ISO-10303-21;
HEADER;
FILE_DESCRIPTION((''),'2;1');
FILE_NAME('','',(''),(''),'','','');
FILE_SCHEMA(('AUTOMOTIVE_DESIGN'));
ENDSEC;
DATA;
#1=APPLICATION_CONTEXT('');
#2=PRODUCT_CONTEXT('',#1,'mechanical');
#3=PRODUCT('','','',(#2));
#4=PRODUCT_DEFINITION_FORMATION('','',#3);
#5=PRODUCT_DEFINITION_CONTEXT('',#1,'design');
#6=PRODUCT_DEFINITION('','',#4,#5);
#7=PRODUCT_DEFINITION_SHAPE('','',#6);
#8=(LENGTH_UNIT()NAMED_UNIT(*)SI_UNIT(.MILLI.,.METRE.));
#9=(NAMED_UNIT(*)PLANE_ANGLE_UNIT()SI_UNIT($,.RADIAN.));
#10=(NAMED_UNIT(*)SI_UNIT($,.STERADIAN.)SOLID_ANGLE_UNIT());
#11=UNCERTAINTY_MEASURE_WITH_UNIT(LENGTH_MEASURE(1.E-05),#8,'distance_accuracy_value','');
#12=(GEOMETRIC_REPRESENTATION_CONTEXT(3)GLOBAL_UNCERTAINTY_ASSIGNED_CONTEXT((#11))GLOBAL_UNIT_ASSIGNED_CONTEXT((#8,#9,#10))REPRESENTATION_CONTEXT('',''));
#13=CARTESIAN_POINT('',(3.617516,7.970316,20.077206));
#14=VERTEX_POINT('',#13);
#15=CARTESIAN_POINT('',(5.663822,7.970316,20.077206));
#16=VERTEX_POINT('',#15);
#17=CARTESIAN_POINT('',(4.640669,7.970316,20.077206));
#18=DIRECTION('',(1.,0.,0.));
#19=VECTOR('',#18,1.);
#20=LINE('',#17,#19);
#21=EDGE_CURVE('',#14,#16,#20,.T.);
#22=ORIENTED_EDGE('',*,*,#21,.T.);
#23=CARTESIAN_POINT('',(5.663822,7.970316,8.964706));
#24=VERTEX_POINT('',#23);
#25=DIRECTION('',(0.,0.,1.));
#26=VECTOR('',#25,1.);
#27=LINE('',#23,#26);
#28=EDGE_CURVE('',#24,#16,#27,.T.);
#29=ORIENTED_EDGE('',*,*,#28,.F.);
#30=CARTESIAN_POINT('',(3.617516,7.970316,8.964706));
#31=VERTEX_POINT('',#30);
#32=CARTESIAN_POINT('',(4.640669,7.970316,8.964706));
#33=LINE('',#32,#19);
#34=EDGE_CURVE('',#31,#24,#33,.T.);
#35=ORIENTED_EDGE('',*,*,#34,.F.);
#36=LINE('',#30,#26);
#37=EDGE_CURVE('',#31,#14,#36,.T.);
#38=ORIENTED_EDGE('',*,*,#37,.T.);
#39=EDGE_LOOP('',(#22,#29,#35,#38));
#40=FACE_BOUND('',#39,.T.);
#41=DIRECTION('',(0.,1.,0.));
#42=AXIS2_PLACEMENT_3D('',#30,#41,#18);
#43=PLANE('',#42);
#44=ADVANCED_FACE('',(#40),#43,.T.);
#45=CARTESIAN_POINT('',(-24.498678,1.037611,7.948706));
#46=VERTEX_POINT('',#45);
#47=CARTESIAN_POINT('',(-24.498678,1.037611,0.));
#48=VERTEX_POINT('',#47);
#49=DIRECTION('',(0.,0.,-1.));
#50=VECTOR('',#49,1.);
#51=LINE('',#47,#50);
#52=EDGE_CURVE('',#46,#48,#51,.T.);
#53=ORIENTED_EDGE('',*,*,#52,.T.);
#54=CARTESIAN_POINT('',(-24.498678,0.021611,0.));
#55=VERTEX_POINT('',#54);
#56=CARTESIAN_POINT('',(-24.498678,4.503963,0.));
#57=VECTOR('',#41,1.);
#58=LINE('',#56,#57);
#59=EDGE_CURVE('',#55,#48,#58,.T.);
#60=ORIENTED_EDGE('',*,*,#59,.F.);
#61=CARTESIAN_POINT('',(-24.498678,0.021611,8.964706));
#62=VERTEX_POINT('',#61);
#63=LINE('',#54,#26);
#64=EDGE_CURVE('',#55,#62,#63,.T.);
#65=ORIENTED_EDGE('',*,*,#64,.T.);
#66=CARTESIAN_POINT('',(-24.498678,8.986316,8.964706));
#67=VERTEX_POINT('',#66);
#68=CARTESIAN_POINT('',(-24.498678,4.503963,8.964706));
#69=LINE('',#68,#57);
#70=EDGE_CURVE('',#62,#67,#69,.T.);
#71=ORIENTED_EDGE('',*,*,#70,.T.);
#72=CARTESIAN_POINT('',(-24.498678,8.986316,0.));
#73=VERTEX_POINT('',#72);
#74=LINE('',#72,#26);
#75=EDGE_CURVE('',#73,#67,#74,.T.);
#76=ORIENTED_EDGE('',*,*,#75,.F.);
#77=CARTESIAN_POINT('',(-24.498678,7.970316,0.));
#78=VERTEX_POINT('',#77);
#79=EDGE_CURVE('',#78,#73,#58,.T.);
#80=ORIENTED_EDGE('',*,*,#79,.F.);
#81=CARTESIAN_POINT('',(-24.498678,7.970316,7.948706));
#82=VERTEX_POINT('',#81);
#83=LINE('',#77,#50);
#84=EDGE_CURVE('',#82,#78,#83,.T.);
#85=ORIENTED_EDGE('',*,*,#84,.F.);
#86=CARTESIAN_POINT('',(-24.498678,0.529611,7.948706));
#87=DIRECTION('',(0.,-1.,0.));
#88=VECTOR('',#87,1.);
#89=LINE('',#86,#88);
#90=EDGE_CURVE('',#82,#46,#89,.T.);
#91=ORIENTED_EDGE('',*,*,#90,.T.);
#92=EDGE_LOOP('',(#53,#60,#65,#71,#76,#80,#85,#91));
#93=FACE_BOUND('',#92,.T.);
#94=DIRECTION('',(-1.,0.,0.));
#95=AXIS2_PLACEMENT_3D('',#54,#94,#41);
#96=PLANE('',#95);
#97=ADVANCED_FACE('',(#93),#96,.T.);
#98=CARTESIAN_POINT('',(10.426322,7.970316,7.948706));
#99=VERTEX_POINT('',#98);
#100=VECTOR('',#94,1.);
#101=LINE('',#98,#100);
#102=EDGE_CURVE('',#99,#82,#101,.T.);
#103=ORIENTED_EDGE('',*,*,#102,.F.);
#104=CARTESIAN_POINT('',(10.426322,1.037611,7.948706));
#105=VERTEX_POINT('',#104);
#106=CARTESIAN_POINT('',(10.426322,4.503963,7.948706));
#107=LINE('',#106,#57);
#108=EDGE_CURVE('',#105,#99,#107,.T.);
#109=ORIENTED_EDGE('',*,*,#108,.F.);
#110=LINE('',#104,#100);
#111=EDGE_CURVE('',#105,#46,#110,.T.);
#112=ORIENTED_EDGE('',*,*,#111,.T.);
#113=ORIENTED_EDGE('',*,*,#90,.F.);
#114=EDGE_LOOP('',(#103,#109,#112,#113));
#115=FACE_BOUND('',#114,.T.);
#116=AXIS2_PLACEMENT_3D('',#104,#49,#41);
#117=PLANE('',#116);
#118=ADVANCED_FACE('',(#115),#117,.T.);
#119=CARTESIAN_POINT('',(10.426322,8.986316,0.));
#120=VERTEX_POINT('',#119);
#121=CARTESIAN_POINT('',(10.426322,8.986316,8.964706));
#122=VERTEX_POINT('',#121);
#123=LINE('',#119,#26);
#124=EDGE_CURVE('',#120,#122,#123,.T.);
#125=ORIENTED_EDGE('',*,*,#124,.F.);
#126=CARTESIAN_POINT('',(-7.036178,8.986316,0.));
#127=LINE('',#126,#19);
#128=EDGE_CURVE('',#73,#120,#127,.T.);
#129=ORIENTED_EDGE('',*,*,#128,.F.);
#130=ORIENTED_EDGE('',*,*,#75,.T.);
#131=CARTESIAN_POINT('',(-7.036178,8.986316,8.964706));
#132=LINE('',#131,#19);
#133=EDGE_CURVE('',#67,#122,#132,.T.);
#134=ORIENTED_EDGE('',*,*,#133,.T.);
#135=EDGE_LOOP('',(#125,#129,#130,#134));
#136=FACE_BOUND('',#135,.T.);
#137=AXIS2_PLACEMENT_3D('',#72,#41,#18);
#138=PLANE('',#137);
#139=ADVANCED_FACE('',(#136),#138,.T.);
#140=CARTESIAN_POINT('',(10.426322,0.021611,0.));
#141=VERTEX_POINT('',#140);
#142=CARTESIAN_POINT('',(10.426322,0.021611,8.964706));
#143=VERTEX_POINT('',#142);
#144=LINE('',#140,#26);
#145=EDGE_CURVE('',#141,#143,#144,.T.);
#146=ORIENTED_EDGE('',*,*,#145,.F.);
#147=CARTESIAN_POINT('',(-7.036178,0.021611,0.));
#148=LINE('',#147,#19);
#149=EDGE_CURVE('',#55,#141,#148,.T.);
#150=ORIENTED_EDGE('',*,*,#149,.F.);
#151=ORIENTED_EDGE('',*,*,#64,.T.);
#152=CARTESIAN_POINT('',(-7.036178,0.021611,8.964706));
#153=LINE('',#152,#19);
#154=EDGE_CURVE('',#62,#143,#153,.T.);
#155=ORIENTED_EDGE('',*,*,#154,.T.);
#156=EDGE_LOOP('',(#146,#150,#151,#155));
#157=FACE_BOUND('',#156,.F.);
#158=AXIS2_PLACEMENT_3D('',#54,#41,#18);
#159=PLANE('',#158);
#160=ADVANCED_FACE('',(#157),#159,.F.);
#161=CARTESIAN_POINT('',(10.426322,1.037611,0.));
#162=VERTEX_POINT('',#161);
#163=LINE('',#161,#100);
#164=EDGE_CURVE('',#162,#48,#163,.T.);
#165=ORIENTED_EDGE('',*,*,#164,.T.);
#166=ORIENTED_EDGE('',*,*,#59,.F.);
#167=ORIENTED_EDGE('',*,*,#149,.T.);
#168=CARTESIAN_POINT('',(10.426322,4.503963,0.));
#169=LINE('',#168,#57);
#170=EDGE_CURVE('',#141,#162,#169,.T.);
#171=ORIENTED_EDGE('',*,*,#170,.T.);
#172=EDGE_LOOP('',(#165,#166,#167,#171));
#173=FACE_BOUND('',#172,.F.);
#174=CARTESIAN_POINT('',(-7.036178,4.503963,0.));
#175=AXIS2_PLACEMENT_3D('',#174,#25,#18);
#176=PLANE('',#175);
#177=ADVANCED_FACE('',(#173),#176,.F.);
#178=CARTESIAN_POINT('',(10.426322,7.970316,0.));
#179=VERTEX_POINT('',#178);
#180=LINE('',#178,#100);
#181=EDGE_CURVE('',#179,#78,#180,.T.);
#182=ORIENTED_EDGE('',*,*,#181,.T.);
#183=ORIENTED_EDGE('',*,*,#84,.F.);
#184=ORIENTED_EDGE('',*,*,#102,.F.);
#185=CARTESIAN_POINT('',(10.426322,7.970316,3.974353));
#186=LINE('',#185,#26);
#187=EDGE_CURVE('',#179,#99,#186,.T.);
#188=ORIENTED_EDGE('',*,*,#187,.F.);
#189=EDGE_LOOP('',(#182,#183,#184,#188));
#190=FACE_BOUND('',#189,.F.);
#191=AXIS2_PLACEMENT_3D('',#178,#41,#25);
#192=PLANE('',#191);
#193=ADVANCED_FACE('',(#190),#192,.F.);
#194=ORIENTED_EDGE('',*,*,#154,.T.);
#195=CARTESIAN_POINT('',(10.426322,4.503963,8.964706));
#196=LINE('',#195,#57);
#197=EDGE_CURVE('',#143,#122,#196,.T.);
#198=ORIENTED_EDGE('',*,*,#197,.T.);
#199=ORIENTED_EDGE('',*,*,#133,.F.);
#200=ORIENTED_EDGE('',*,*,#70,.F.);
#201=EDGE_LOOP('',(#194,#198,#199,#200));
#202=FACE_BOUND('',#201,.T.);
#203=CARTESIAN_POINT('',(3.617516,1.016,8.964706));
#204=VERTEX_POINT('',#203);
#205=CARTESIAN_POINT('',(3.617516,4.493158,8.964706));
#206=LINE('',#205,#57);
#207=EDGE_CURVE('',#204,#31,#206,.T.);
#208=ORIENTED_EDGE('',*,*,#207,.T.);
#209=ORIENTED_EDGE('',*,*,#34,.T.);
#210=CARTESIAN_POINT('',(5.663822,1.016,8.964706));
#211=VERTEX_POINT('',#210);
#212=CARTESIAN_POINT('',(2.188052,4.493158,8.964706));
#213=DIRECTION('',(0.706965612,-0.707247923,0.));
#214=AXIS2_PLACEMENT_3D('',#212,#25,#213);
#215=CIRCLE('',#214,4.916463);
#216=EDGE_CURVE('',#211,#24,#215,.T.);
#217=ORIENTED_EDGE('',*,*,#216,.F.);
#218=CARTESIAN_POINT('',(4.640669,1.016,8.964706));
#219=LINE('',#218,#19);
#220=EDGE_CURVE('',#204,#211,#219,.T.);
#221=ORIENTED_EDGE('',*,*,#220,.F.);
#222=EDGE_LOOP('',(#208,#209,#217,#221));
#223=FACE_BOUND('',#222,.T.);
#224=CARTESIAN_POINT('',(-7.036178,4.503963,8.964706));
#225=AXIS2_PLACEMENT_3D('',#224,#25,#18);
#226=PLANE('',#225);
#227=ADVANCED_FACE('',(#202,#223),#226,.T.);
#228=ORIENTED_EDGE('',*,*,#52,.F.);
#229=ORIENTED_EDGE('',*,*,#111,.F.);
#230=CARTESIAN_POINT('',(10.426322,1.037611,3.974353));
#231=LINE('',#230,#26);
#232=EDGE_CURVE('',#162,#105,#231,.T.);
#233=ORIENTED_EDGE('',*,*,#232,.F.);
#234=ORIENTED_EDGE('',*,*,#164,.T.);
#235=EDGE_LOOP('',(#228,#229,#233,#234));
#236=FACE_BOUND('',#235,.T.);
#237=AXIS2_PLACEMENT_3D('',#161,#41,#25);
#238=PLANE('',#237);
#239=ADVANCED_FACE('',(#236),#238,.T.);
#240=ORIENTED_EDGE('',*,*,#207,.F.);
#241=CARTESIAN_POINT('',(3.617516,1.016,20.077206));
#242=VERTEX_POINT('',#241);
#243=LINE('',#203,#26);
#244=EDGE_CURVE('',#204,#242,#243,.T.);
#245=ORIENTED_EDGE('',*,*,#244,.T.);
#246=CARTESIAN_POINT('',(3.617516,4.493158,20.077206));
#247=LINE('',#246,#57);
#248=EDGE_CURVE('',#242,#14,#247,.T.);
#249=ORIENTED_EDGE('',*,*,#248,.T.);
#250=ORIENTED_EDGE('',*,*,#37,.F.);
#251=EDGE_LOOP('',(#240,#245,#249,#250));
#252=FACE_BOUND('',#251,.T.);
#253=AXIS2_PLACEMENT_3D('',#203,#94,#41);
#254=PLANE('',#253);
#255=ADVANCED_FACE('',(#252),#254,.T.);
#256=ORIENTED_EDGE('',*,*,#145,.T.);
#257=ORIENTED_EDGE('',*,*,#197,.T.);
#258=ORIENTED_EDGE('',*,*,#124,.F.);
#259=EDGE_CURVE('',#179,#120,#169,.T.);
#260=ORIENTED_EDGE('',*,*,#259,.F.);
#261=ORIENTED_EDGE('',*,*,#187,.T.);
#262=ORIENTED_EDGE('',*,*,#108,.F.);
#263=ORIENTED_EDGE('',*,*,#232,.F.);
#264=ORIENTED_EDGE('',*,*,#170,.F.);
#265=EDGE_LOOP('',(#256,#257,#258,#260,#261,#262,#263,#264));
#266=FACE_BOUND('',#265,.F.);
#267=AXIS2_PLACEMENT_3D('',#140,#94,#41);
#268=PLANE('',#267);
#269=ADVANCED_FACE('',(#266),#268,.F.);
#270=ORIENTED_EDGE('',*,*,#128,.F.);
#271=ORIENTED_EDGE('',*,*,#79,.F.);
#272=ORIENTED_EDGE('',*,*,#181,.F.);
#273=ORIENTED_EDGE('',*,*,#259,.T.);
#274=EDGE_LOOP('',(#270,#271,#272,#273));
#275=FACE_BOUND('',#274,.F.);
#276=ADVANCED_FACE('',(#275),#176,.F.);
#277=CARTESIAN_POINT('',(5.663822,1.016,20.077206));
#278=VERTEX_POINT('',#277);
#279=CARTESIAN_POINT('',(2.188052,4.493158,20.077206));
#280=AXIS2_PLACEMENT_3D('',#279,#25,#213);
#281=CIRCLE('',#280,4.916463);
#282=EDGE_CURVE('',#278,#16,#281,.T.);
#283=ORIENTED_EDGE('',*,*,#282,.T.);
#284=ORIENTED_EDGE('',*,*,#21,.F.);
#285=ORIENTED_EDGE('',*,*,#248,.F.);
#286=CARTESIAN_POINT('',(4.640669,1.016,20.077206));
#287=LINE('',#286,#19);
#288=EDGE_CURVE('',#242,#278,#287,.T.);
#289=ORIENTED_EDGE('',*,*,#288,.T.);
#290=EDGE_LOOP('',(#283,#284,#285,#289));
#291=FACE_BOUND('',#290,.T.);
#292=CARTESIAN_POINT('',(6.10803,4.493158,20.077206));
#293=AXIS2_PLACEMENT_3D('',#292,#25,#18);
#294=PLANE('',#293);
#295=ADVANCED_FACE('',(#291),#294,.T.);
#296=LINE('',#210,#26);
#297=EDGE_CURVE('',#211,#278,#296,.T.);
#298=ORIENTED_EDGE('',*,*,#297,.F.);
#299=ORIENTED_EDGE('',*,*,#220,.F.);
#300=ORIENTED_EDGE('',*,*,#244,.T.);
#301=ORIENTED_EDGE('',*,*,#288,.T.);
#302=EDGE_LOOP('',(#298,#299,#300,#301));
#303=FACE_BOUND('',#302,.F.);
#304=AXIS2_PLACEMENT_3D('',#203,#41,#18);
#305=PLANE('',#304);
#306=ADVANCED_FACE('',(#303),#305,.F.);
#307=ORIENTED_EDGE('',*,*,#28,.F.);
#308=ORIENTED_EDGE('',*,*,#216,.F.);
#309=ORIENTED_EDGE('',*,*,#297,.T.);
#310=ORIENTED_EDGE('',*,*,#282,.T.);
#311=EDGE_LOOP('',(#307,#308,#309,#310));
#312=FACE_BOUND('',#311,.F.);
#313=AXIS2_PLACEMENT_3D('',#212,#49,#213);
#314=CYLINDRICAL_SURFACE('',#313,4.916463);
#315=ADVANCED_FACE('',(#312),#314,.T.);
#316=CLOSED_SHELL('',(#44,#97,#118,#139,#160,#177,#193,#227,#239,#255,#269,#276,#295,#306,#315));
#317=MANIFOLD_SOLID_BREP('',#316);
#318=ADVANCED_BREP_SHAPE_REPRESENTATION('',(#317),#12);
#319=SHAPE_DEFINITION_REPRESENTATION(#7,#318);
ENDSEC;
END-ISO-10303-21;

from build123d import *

# Parameters (mm, degrees)
F0_W     = 34.925
F0_H     = 8.9647058824
F1_DEPTH = 8.9647058824
F2_W     = 6.9327058824
F2_H     = 7.9487058824
F3_DEPTH = 34.926
F4_W     = 2.0463057544
F4_H     = 6.9543164351
F5_DEPTH = 11.1125


# Not quite as in the source:
# - a length typed as a fraction of an inch, garbled in the dataset ("3 / 203.2 mm" for 3/8 in), is restored


with BuildPart() as f1:
    # F0 (on Top) → F1 (new body)
    with BuildSketch(Plane.XY):
        with Locations((-7.0361781826, 4.5039634939)):
            Rectangle(F0_W, F0_H)
    extrude(amount=F1_DEPTH)

    # F2 (on face) → F3 (cut, through all)
    with BuildSketch(Plane.YZ.offset(10.4263218174)):
        with Locations((4.5039634939, 3.9743529412)):
            Rectangle(F2_W, F2_H)
    extrude(amount=-F3_DEPTH, mode=Mode.SUBTRACT)

    # F4 (on face) → F5 (join)
    with BuildSketch(Plane.XY.offset(8.9647058824)):
        with BuildLine():
            ThreePointArc((5.6638218174, 1.016), (7.1045145349, 4.4931582176), (5.6638218174, 7.9703164351))
            Line((5.6638218174, 7.9703164351), (5.6638218174, 1.016))
        make_face()
        with Locations((4.6406689402, 4.4931582176)):
            Rectangle(F4_W, F4_H)
    extrude(amount=F5_DEPTH)


solid = f1.part
